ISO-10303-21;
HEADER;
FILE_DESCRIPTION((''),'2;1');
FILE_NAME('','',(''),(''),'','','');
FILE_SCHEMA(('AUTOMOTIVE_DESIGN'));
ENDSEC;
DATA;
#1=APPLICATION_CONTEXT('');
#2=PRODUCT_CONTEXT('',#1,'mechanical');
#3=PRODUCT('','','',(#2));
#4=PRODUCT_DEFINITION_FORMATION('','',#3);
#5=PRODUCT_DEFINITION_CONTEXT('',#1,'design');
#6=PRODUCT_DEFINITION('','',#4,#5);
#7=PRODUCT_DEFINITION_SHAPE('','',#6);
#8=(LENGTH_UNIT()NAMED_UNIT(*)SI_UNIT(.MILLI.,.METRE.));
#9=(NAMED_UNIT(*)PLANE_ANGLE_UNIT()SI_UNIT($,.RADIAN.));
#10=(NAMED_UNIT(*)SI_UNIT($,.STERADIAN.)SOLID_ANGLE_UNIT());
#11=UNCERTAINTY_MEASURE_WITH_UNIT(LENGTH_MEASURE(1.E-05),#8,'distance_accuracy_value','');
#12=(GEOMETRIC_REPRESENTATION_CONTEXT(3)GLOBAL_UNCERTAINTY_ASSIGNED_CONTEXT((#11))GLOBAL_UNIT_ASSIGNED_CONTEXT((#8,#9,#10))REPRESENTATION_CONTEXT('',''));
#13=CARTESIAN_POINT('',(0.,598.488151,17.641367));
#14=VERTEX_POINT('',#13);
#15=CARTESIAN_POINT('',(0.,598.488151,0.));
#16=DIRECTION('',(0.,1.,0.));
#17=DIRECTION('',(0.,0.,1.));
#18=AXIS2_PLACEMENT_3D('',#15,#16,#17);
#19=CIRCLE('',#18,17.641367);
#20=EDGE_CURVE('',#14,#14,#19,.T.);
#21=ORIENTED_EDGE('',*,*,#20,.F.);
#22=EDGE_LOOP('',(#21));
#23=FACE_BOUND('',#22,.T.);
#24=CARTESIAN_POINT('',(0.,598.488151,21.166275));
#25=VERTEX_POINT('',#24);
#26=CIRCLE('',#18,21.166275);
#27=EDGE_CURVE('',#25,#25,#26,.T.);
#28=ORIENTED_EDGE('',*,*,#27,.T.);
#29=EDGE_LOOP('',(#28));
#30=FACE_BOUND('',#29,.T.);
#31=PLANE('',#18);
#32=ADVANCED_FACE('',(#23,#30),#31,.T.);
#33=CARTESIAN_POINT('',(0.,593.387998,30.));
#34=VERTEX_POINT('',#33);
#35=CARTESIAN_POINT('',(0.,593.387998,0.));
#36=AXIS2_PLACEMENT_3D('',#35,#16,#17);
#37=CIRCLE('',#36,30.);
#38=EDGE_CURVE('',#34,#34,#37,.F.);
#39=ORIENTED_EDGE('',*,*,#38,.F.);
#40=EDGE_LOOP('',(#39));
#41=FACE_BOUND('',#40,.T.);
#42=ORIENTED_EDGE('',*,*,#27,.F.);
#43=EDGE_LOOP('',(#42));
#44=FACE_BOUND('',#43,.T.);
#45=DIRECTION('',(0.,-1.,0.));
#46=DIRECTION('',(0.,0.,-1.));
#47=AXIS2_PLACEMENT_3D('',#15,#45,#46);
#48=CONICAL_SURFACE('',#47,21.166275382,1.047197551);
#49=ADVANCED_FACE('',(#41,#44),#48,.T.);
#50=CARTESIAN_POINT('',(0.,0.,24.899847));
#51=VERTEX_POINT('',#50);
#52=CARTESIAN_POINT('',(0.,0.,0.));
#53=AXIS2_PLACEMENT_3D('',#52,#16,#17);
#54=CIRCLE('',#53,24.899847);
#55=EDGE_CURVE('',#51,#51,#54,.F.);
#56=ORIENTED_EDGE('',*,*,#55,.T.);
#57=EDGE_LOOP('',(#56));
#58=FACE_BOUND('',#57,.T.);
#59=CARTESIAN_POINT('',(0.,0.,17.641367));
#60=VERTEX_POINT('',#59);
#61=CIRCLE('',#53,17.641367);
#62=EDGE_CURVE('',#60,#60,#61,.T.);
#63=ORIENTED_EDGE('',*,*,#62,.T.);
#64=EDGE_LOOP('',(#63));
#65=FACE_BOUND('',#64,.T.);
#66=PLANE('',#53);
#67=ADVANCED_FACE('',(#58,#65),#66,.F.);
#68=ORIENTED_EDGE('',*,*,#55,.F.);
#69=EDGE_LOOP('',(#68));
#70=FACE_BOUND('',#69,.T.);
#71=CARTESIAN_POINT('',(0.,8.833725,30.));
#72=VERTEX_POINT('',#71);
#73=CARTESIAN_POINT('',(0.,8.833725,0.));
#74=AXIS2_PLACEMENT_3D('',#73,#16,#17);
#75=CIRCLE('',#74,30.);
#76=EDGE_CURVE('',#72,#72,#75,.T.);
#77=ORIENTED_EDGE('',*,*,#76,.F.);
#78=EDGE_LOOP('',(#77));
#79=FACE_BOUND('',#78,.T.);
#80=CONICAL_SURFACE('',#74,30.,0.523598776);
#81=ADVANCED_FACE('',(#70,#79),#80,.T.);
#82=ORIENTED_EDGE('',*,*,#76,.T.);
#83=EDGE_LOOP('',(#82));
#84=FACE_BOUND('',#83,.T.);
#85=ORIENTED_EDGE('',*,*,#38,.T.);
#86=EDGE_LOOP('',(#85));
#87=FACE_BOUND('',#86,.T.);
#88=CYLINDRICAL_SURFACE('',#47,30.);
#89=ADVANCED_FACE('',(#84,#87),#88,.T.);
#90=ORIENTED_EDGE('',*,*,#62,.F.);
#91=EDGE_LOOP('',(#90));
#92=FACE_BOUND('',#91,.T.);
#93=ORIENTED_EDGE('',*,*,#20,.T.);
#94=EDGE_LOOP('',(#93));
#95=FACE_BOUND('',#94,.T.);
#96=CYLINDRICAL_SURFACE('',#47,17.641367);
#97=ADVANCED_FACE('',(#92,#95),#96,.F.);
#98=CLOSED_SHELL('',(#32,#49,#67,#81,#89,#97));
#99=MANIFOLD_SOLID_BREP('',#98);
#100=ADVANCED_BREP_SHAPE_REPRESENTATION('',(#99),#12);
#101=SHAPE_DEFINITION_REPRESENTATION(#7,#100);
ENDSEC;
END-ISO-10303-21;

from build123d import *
from OCP.BRepFilletAPI import BRepFilletAPI_MakeChamfer

# Parameters (mm, degrees)
SKETCH1_R           = 30
BOSS_EXTRUDE1_DEPTH = 598.488150804
SKETCH2_R           = 17.641366552
CUT_EXTRUDE1_DEPTH  = 600.990055462
CHAMFER1_SIZE       = 5.100153286
CHAMFER1_SIZE2      = 8.833724618


with BuildPart() as part:
    # Sketch1 → Boss-Extrude1 (new body)
    with BuildSketch(Plane(origin=(0, 0, 0), x_dir=(1, 0, 0), z_dir=(0, 1, 0))):
        Circle(SKETCH1_R)
    extrude(amount=BOSS_EXTRUDE1_DEPTH)

    # Sketch2 → Cut-Extrude1 (cut, through all)
    with BuildSketch(Plane(origin=(0, 0, 0), x_dir=(1, 0, 0), z_dir=(0, 1, 0))):
        Circle(SKETCH2_R)
    extrude(amount=CUT_EXTRUDE1_DEPTH, mode=Mode.SUBTRACT)

    # Chamfer1: one chamfer whose edges measure the first distance from different faces: ONE call of the kernel's chamfer builder (chamfer() names one face for all edges)
    chamfer1_edges_1 = [part.edges().sort_by_distance(p)[0] for p in [
        (-30, 598.488150804, 0),
    ]]
    chamfer1_side_1 = [part.faces().sort_by_distance(p)[0] for p in [
        (-30, 299.244075402, 0),
    ]]
    chamfer1_edges_2 = [part.edges().sort_by_distance(p)[0] for p in [
        (-30, 0, 0),
    ]]
    chamfer1_side_2 = [part.faces().sort_by_distance(p)[0] for p in [
        (-29.151471863, 0, 0),
    ]]
    chamfer1 = BRepFilletAPI_MakeChamfer(part.part.solid().wrapped)
    for e in chamfer1_edges_1:
        chamfer1.Add(CHAMFER1_SIZE, CHAMFER1_SIZE2, e.wrapped, chamfer1_side_1[0].wrapped)  # the first distance lies on this face
    for e in chamfer1_edges_2:
        chamfer1.Add(CHAMFER1_SIZE, CHAMFER1_SIZE2, e.wrapped, chamfer1_side_2[0].wrapped)  # the first distance lies on this face
    add(Compound.cast(chamfer1.Shape()), mode=Mode.REPLACE)


solid = part.part
